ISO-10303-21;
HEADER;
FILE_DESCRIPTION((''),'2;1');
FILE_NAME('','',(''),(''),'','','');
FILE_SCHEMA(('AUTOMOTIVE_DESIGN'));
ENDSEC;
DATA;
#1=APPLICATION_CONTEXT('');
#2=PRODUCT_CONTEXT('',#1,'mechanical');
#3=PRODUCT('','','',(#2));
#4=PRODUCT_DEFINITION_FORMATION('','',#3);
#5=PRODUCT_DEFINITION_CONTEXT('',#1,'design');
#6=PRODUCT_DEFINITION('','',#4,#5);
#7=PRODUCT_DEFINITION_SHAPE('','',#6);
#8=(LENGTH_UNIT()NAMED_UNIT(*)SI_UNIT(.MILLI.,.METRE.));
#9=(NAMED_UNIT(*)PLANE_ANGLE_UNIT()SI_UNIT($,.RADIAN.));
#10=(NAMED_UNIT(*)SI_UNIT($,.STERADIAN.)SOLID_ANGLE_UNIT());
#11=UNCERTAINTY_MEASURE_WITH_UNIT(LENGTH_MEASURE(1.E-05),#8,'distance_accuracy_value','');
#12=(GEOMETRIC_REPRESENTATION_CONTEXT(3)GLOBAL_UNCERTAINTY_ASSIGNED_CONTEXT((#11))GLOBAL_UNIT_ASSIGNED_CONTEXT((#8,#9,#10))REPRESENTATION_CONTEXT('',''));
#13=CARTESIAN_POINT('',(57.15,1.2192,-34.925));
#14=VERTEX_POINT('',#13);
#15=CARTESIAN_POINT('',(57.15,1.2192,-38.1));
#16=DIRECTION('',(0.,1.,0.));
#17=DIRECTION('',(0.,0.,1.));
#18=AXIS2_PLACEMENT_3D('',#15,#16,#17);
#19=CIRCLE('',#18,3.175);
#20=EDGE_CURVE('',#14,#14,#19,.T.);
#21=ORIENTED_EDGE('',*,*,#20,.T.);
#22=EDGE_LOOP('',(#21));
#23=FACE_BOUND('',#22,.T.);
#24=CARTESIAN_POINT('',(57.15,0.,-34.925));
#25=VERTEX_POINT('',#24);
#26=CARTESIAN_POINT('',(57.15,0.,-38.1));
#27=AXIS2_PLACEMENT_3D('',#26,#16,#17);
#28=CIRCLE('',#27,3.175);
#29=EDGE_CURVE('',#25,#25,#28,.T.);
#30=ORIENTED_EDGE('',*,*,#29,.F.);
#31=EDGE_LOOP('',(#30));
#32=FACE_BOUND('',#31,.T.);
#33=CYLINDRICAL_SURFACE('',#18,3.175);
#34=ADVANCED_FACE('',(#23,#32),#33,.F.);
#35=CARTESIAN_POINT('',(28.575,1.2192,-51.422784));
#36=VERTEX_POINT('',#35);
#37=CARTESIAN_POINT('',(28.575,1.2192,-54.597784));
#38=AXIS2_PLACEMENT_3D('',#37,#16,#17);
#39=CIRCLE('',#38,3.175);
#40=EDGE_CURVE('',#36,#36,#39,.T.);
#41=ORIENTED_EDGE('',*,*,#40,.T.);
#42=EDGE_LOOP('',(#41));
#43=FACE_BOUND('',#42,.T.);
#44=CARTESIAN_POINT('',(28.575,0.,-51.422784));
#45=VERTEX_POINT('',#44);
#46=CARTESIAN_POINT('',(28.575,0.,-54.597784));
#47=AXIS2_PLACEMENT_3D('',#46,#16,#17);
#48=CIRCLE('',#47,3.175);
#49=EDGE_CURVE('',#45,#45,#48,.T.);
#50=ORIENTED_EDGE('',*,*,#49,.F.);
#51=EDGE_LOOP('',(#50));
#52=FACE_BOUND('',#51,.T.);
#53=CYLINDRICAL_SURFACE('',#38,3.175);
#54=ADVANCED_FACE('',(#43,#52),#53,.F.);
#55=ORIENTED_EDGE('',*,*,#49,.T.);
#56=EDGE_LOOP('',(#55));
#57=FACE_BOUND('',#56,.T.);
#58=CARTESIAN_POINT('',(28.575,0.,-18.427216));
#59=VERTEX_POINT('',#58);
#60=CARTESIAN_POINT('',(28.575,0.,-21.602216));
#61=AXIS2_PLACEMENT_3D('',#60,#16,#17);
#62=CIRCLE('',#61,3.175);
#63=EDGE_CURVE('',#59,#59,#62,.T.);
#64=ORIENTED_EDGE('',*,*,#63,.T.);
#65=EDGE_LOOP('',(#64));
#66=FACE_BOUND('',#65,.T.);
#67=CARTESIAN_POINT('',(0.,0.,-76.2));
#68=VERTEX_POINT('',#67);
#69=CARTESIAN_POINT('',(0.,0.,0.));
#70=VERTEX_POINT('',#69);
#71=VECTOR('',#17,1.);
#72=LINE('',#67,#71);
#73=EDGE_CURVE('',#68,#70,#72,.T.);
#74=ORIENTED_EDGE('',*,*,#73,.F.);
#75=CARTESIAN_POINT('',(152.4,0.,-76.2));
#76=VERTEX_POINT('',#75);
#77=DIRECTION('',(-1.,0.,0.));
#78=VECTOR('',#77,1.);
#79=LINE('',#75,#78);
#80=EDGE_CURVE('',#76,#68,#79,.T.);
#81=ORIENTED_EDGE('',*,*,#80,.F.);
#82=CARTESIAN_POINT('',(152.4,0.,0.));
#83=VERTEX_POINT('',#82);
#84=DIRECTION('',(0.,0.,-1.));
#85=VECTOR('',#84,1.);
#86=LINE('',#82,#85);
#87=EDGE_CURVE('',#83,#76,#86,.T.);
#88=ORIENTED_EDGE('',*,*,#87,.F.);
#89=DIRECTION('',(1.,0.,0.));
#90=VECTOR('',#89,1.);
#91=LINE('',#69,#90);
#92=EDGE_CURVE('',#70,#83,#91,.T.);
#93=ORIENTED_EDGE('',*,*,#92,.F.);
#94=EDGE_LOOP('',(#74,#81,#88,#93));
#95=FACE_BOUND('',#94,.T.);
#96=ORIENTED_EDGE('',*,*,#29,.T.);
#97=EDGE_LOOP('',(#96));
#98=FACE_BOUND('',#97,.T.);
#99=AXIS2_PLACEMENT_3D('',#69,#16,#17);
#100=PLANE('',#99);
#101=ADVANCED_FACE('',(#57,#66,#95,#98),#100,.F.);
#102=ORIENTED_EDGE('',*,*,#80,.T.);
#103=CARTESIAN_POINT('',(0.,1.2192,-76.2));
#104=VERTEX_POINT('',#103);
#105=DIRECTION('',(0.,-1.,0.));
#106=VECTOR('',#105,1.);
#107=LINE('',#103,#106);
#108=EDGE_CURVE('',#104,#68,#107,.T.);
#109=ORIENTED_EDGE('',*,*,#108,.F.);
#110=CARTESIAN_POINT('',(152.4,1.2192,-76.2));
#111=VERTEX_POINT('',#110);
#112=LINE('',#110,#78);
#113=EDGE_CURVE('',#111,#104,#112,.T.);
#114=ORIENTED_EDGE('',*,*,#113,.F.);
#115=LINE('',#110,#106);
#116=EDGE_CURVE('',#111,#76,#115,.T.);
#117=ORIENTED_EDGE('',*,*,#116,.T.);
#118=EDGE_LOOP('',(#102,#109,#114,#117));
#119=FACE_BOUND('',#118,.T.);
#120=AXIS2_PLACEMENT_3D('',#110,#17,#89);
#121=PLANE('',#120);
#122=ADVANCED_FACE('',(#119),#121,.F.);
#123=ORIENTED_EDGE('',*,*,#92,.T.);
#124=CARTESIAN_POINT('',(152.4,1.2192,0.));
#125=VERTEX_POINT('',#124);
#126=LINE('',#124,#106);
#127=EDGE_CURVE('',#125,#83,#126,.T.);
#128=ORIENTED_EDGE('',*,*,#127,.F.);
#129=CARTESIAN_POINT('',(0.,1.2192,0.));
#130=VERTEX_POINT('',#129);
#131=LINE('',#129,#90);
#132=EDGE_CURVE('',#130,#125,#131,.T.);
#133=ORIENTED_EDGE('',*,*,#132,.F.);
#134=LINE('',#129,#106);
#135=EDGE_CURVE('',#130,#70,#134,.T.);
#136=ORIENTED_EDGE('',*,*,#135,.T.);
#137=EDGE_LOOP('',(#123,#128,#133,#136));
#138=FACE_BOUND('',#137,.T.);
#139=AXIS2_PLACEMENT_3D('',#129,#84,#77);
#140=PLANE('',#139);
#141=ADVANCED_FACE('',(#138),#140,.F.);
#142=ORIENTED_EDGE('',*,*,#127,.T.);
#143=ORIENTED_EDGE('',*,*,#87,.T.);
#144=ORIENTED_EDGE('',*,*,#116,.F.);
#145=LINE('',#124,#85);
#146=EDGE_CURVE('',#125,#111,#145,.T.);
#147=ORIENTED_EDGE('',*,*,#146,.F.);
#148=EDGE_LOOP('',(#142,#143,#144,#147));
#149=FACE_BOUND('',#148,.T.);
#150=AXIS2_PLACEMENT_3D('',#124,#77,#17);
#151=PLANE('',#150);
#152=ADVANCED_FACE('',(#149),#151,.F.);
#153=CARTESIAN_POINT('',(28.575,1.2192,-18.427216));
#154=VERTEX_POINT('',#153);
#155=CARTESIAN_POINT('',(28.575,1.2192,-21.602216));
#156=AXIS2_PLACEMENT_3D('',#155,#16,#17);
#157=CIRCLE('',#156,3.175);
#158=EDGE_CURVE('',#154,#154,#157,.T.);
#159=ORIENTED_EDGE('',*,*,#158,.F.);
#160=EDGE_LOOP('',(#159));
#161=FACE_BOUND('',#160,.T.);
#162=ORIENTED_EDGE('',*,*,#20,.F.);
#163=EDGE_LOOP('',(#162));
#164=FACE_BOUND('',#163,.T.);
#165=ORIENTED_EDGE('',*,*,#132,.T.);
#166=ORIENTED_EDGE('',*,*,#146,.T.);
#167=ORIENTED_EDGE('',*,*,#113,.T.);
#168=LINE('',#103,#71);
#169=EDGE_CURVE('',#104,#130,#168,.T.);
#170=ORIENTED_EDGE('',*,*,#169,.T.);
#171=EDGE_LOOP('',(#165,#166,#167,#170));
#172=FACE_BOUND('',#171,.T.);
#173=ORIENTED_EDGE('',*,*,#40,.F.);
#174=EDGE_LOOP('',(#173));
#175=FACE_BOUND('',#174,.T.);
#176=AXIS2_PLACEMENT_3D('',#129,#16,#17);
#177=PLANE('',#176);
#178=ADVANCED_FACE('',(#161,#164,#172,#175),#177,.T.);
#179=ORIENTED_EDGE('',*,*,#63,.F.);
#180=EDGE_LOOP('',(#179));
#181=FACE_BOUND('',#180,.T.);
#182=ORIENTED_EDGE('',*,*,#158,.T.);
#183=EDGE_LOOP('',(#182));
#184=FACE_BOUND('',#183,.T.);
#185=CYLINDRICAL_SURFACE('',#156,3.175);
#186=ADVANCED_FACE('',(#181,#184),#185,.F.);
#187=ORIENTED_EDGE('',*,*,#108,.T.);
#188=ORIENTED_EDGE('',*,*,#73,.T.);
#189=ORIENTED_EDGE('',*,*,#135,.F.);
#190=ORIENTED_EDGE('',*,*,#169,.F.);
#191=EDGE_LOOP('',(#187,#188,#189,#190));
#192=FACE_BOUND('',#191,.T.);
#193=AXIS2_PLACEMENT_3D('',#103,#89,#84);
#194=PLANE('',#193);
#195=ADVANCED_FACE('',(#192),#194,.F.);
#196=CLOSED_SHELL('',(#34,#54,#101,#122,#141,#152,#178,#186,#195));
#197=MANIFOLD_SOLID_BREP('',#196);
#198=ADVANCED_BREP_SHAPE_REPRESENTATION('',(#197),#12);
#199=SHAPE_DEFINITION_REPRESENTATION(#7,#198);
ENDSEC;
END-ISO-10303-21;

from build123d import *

# Parameters (mm, degrees)
SKETCH2_W                   = 152.4
SKETCH2_H                   = 76.2
BASE_FLANGE1_DEPTH          = 1.2192
F_1_4_0_25_DIAMETER_HOLE1_D = 6.35
CIRPATTERN1_COUNT           = 3


# Sheet-metal steps are written as plain solids
with BuildPart() as part:
    # Sketch2 → Base-Flange1 (new body)
    with BuildSketch(Plane(origin=(0, 0, 0), x_dir=(1, 0, 0), z_dir=(0, 1, 0))):
        with Locations((76.2, 38.1)):
            Rectangle(SKETCH2_W, SKETCH2_H)
    extrude(amount=BASE_FLANGE1_DEPTH)

    # 1/4 (0.25) Diameter Hole1 (through all)
    with Locations(Plane(origin=(57.15, 1.2192, -38.1), x_dir=(0, 0, 1), z_dir=(0, 1, 0))):
        with Locations((0, 0)):
            f_1_4_0_25_diameter_hole1 = Hole(F_1_4_0_25_DIAMETER_HOLE1_D / 2)

    # CirPattern1: 1/4 (0.25) Diameter Hole1 ×3 about axis
    cirpattern1_axis = Axis((38.1, 0, -38.1), (0, 1, 0))
    for i in range(1, CIRPATTERN1_COUNT):
        add(f_1_4_0_25_diameter_hole1.rotate(cirpattern1_axis, i * 360 / CIRPATTERN1_COUNT), mode=Mode.SUBTRACT)


solid = part.part
